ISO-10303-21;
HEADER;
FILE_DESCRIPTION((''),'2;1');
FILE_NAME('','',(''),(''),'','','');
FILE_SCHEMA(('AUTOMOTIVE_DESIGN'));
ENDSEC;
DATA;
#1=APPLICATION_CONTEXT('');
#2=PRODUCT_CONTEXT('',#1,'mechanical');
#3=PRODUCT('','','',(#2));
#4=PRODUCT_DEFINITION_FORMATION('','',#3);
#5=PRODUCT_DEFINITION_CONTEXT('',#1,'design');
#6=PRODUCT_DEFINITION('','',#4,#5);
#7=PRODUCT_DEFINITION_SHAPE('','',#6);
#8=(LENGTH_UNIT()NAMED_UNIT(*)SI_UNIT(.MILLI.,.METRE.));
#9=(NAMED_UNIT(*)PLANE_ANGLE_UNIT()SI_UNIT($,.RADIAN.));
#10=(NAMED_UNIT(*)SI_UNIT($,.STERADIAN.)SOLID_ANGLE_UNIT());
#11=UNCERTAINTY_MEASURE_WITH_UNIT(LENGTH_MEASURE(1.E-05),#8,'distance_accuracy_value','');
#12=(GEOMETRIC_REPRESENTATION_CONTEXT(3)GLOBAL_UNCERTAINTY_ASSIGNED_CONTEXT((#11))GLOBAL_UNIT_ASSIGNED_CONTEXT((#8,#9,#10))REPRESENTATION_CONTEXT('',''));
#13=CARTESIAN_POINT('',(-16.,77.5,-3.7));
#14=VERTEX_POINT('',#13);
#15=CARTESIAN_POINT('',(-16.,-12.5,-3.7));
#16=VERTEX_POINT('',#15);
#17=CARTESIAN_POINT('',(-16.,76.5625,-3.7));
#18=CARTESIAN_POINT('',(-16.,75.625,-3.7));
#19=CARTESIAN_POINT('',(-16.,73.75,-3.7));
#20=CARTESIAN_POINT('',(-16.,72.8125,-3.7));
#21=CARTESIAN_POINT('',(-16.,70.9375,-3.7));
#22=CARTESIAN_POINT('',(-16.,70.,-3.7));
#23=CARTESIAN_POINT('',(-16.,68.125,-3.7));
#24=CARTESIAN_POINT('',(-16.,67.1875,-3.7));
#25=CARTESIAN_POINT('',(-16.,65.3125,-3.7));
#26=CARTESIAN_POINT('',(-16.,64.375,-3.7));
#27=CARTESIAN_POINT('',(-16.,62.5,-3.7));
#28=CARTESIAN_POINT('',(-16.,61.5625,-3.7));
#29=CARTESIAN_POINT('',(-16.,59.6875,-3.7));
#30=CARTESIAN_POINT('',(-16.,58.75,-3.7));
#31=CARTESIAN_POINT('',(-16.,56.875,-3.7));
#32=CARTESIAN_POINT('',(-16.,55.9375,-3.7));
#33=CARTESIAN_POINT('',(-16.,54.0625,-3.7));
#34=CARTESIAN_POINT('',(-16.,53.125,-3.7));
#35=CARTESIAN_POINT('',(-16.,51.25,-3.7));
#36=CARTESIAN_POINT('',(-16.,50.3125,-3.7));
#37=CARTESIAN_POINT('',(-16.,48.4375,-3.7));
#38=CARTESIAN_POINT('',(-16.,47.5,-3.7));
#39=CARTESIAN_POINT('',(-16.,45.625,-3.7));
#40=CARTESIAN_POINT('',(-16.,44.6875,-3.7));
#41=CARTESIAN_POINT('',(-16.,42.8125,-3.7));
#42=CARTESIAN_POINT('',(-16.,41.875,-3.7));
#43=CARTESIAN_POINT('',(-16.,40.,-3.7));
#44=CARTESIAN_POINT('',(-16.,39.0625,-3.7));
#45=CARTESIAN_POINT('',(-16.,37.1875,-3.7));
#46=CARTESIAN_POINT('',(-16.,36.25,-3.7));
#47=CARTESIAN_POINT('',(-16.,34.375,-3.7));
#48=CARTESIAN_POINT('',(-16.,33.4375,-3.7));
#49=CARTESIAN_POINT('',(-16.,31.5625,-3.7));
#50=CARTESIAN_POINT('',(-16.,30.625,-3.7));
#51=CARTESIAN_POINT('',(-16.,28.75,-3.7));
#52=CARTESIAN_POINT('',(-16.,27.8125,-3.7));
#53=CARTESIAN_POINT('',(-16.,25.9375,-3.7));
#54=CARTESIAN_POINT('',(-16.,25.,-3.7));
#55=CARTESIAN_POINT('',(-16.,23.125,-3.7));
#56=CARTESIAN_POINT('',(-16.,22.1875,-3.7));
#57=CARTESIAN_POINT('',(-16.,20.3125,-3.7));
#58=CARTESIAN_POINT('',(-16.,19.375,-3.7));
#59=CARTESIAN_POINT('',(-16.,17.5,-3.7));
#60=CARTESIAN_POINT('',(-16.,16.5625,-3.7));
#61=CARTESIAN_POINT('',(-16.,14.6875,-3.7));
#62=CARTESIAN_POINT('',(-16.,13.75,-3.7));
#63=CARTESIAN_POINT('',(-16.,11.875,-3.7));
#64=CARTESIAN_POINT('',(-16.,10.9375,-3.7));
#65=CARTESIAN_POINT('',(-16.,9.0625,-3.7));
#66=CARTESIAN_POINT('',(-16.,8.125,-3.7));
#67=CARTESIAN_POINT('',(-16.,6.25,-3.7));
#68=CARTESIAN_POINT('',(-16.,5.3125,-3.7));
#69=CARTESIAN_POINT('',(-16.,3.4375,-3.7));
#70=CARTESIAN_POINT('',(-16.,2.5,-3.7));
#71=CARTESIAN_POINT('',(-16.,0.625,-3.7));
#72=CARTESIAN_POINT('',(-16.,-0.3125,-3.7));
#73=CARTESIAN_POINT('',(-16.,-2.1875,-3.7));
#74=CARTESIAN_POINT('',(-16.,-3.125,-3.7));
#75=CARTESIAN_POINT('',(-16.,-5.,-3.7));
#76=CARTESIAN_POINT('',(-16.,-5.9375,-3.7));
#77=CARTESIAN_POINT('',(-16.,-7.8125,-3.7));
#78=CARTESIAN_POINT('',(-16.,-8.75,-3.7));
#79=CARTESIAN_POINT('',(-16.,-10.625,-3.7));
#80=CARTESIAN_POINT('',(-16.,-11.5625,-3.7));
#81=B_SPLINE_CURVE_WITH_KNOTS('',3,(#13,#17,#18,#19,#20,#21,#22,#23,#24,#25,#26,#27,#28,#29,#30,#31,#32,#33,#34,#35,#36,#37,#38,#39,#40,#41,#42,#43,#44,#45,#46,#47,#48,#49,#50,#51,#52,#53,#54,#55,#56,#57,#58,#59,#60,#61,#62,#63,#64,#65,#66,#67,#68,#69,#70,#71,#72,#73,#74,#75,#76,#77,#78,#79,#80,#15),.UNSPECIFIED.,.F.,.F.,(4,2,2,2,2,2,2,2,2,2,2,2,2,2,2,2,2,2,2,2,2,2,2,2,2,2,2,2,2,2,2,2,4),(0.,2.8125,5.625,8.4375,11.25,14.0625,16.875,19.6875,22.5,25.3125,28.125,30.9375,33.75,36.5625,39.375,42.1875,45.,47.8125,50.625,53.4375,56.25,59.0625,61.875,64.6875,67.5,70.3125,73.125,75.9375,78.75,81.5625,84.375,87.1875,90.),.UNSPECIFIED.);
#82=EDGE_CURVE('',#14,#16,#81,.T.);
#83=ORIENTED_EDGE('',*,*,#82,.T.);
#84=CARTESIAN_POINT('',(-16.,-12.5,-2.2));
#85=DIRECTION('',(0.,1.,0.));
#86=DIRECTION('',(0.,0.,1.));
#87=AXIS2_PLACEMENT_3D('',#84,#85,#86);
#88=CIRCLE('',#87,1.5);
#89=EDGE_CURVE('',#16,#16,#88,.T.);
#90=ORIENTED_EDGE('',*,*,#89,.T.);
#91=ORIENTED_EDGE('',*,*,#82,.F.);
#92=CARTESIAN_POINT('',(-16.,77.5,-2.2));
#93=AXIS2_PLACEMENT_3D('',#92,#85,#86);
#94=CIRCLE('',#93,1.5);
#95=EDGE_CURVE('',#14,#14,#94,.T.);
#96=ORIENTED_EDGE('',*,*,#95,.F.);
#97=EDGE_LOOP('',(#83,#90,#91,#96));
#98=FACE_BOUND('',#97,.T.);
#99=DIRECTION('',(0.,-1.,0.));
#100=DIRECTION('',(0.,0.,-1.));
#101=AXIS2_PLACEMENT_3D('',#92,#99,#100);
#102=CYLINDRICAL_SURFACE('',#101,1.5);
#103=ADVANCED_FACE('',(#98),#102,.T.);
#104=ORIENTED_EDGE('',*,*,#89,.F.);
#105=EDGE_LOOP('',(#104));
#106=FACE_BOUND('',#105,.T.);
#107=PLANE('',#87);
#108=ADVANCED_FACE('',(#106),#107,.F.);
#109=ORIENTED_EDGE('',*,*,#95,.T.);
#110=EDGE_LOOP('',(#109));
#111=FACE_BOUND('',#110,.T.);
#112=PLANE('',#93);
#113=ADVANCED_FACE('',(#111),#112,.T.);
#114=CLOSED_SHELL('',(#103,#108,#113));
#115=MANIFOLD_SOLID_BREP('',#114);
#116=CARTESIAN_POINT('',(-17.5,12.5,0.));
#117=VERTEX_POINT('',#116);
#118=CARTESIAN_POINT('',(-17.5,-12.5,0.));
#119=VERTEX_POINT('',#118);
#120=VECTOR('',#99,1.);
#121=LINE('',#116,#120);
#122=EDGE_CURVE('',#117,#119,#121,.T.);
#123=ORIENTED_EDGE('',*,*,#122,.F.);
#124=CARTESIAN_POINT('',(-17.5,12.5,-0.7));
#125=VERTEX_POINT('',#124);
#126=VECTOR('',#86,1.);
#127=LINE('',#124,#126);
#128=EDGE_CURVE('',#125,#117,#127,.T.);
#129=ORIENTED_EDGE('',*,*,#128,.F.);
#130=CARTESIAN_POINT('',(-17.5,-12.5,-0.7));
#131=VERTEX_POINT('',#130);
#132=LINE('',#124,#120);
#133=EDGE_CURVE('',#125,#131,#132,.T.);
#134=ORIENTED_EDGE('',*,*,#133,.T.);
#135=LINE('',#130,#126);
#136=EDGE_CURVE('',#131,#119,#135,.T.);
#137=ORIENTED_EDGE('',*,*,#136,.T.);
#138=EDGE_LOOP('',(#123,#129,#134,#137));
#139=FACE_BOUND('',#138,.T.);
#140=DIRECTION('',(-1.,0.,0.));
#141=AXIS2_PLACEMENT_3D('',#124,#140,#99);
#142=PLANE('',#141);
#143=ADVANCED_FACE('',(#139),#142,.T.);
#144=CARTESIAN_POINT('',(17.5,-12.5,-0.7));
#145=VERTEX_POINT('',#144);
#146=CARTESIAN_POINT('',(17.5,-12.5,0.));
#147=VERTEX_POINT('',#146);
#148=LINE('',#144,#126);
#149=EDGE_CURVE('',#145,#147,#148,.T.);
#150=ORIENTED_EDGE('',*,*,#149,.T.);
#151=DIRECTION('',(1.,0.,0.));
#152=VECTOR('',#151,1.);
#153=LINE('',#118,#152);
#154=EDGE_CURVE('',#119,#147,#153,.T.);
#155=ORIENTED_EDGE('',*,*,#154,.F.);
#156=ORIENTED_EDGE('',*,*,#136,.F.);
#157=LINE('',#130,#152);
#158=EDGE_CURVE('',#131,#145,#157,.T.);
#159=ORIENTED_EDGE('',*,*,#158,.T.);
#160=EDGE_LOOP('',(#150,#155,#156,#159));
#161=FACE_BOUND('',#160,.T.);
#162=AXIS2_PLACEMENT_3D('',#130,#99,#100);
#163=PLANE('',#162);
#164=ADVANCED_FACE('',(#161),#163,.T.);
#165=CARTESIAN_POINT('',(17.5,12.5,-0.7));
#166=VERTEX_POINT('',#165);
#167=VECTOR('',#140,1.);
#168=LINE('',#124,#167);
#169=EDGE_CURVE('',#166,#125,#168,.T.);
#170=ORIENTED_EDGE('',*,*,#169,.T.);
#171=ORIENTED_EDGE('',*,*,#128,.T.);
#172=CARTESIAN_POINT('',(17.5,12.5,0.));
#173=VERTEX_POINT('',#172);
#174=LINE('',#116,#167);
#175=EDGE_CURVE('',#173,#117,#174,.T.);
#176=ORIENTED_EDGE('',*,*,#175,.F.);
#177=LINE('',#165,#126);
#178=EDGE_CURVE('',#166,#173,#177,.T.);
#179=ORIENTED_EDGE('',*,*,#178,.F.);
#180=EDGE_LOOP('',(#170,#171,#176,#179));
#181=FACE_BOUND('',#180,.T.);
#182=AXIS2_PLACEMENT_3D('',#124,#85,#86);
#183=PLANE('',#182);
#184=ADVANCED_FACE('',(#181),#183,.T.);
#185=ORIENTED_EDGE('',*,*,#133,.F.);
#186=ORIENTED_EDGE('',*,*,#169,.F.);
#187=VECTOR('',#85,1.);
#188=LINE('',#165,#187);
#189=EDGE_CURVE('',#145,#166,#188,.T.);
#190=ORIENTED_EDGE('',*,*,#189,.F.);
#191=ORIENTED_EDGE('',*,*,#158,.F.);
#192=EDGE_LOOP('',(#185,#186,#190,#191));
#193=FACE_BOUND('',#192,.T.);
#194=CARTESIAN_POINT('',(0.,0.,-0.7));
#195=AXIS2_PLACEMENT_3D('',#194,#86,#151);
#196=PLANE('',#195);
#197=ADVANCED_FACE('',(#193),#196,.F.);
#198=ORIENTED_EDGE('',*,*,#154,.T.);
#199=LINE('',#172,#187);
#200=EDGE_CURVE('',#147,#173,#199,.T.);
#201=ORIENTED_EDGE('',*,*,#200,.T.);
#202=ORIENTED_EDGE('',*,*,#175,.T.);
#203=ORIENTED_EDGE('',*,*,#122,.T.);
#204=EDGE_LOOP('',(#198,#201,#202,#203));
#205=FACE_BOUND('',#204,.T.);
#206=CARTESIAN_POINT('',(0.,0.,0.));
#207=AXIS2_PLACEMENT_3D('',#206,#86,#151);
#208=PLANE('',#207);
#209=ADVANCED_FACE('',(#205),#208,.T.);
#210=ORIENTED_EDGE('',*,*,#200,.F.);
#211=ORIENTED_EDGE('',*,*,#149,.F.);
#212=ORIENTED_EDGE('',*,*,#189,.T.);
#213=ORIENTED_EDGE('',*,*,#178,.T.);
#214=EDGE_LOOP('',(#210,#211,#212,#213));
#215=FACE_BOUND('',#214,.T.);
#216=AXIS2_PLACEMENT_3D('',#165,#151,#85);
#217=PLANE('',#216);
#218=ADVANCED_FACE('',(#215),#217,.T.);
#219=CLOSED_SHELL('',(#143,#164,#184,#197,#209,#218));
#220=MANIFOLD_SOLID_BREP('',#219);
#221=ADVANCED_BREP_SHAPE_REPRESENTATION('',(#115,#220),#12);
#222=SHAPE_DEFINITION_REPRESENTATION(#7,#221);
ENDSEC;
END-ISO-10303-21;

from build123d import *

# Parameters (mm, degrees)
SKETCH1_W           = 35
SKETCH1_H           = 25
BASE_FLANGE1_DEPTH  = 0.7
SKETCH6_R           = 1.5
BOSS_EXTRUDE1_DEPTH = 90


# Sheet-metal steps are written as plain solids
with BuildPart() as part:
    # Sketch1 → Base-Flange1 (new body)
    with BuildSketch(Plane.XY):
        Rectangle(SKETCH1_W, SKETCH1_H)
    extrude(amount=-BASE_FLANGE1_DEPTH)


with BuildPart() as body_2:
    # Sketch6 → Boss-Extrude1 (new body)
    with BuildSketch(Plane(origin=(0, -12.5, 0), x_dir=(1, 0, 0), z_dir=(0, 1, 0))):
        with Locations(Location((-16, 2.2, 0), (0, 0, 90))):
            Circle(SKETCH6_R)
    extrude(amount=BOSS_EXTRUDE1_DEPTH)


solid = Compound([part.part, body_2.part])
